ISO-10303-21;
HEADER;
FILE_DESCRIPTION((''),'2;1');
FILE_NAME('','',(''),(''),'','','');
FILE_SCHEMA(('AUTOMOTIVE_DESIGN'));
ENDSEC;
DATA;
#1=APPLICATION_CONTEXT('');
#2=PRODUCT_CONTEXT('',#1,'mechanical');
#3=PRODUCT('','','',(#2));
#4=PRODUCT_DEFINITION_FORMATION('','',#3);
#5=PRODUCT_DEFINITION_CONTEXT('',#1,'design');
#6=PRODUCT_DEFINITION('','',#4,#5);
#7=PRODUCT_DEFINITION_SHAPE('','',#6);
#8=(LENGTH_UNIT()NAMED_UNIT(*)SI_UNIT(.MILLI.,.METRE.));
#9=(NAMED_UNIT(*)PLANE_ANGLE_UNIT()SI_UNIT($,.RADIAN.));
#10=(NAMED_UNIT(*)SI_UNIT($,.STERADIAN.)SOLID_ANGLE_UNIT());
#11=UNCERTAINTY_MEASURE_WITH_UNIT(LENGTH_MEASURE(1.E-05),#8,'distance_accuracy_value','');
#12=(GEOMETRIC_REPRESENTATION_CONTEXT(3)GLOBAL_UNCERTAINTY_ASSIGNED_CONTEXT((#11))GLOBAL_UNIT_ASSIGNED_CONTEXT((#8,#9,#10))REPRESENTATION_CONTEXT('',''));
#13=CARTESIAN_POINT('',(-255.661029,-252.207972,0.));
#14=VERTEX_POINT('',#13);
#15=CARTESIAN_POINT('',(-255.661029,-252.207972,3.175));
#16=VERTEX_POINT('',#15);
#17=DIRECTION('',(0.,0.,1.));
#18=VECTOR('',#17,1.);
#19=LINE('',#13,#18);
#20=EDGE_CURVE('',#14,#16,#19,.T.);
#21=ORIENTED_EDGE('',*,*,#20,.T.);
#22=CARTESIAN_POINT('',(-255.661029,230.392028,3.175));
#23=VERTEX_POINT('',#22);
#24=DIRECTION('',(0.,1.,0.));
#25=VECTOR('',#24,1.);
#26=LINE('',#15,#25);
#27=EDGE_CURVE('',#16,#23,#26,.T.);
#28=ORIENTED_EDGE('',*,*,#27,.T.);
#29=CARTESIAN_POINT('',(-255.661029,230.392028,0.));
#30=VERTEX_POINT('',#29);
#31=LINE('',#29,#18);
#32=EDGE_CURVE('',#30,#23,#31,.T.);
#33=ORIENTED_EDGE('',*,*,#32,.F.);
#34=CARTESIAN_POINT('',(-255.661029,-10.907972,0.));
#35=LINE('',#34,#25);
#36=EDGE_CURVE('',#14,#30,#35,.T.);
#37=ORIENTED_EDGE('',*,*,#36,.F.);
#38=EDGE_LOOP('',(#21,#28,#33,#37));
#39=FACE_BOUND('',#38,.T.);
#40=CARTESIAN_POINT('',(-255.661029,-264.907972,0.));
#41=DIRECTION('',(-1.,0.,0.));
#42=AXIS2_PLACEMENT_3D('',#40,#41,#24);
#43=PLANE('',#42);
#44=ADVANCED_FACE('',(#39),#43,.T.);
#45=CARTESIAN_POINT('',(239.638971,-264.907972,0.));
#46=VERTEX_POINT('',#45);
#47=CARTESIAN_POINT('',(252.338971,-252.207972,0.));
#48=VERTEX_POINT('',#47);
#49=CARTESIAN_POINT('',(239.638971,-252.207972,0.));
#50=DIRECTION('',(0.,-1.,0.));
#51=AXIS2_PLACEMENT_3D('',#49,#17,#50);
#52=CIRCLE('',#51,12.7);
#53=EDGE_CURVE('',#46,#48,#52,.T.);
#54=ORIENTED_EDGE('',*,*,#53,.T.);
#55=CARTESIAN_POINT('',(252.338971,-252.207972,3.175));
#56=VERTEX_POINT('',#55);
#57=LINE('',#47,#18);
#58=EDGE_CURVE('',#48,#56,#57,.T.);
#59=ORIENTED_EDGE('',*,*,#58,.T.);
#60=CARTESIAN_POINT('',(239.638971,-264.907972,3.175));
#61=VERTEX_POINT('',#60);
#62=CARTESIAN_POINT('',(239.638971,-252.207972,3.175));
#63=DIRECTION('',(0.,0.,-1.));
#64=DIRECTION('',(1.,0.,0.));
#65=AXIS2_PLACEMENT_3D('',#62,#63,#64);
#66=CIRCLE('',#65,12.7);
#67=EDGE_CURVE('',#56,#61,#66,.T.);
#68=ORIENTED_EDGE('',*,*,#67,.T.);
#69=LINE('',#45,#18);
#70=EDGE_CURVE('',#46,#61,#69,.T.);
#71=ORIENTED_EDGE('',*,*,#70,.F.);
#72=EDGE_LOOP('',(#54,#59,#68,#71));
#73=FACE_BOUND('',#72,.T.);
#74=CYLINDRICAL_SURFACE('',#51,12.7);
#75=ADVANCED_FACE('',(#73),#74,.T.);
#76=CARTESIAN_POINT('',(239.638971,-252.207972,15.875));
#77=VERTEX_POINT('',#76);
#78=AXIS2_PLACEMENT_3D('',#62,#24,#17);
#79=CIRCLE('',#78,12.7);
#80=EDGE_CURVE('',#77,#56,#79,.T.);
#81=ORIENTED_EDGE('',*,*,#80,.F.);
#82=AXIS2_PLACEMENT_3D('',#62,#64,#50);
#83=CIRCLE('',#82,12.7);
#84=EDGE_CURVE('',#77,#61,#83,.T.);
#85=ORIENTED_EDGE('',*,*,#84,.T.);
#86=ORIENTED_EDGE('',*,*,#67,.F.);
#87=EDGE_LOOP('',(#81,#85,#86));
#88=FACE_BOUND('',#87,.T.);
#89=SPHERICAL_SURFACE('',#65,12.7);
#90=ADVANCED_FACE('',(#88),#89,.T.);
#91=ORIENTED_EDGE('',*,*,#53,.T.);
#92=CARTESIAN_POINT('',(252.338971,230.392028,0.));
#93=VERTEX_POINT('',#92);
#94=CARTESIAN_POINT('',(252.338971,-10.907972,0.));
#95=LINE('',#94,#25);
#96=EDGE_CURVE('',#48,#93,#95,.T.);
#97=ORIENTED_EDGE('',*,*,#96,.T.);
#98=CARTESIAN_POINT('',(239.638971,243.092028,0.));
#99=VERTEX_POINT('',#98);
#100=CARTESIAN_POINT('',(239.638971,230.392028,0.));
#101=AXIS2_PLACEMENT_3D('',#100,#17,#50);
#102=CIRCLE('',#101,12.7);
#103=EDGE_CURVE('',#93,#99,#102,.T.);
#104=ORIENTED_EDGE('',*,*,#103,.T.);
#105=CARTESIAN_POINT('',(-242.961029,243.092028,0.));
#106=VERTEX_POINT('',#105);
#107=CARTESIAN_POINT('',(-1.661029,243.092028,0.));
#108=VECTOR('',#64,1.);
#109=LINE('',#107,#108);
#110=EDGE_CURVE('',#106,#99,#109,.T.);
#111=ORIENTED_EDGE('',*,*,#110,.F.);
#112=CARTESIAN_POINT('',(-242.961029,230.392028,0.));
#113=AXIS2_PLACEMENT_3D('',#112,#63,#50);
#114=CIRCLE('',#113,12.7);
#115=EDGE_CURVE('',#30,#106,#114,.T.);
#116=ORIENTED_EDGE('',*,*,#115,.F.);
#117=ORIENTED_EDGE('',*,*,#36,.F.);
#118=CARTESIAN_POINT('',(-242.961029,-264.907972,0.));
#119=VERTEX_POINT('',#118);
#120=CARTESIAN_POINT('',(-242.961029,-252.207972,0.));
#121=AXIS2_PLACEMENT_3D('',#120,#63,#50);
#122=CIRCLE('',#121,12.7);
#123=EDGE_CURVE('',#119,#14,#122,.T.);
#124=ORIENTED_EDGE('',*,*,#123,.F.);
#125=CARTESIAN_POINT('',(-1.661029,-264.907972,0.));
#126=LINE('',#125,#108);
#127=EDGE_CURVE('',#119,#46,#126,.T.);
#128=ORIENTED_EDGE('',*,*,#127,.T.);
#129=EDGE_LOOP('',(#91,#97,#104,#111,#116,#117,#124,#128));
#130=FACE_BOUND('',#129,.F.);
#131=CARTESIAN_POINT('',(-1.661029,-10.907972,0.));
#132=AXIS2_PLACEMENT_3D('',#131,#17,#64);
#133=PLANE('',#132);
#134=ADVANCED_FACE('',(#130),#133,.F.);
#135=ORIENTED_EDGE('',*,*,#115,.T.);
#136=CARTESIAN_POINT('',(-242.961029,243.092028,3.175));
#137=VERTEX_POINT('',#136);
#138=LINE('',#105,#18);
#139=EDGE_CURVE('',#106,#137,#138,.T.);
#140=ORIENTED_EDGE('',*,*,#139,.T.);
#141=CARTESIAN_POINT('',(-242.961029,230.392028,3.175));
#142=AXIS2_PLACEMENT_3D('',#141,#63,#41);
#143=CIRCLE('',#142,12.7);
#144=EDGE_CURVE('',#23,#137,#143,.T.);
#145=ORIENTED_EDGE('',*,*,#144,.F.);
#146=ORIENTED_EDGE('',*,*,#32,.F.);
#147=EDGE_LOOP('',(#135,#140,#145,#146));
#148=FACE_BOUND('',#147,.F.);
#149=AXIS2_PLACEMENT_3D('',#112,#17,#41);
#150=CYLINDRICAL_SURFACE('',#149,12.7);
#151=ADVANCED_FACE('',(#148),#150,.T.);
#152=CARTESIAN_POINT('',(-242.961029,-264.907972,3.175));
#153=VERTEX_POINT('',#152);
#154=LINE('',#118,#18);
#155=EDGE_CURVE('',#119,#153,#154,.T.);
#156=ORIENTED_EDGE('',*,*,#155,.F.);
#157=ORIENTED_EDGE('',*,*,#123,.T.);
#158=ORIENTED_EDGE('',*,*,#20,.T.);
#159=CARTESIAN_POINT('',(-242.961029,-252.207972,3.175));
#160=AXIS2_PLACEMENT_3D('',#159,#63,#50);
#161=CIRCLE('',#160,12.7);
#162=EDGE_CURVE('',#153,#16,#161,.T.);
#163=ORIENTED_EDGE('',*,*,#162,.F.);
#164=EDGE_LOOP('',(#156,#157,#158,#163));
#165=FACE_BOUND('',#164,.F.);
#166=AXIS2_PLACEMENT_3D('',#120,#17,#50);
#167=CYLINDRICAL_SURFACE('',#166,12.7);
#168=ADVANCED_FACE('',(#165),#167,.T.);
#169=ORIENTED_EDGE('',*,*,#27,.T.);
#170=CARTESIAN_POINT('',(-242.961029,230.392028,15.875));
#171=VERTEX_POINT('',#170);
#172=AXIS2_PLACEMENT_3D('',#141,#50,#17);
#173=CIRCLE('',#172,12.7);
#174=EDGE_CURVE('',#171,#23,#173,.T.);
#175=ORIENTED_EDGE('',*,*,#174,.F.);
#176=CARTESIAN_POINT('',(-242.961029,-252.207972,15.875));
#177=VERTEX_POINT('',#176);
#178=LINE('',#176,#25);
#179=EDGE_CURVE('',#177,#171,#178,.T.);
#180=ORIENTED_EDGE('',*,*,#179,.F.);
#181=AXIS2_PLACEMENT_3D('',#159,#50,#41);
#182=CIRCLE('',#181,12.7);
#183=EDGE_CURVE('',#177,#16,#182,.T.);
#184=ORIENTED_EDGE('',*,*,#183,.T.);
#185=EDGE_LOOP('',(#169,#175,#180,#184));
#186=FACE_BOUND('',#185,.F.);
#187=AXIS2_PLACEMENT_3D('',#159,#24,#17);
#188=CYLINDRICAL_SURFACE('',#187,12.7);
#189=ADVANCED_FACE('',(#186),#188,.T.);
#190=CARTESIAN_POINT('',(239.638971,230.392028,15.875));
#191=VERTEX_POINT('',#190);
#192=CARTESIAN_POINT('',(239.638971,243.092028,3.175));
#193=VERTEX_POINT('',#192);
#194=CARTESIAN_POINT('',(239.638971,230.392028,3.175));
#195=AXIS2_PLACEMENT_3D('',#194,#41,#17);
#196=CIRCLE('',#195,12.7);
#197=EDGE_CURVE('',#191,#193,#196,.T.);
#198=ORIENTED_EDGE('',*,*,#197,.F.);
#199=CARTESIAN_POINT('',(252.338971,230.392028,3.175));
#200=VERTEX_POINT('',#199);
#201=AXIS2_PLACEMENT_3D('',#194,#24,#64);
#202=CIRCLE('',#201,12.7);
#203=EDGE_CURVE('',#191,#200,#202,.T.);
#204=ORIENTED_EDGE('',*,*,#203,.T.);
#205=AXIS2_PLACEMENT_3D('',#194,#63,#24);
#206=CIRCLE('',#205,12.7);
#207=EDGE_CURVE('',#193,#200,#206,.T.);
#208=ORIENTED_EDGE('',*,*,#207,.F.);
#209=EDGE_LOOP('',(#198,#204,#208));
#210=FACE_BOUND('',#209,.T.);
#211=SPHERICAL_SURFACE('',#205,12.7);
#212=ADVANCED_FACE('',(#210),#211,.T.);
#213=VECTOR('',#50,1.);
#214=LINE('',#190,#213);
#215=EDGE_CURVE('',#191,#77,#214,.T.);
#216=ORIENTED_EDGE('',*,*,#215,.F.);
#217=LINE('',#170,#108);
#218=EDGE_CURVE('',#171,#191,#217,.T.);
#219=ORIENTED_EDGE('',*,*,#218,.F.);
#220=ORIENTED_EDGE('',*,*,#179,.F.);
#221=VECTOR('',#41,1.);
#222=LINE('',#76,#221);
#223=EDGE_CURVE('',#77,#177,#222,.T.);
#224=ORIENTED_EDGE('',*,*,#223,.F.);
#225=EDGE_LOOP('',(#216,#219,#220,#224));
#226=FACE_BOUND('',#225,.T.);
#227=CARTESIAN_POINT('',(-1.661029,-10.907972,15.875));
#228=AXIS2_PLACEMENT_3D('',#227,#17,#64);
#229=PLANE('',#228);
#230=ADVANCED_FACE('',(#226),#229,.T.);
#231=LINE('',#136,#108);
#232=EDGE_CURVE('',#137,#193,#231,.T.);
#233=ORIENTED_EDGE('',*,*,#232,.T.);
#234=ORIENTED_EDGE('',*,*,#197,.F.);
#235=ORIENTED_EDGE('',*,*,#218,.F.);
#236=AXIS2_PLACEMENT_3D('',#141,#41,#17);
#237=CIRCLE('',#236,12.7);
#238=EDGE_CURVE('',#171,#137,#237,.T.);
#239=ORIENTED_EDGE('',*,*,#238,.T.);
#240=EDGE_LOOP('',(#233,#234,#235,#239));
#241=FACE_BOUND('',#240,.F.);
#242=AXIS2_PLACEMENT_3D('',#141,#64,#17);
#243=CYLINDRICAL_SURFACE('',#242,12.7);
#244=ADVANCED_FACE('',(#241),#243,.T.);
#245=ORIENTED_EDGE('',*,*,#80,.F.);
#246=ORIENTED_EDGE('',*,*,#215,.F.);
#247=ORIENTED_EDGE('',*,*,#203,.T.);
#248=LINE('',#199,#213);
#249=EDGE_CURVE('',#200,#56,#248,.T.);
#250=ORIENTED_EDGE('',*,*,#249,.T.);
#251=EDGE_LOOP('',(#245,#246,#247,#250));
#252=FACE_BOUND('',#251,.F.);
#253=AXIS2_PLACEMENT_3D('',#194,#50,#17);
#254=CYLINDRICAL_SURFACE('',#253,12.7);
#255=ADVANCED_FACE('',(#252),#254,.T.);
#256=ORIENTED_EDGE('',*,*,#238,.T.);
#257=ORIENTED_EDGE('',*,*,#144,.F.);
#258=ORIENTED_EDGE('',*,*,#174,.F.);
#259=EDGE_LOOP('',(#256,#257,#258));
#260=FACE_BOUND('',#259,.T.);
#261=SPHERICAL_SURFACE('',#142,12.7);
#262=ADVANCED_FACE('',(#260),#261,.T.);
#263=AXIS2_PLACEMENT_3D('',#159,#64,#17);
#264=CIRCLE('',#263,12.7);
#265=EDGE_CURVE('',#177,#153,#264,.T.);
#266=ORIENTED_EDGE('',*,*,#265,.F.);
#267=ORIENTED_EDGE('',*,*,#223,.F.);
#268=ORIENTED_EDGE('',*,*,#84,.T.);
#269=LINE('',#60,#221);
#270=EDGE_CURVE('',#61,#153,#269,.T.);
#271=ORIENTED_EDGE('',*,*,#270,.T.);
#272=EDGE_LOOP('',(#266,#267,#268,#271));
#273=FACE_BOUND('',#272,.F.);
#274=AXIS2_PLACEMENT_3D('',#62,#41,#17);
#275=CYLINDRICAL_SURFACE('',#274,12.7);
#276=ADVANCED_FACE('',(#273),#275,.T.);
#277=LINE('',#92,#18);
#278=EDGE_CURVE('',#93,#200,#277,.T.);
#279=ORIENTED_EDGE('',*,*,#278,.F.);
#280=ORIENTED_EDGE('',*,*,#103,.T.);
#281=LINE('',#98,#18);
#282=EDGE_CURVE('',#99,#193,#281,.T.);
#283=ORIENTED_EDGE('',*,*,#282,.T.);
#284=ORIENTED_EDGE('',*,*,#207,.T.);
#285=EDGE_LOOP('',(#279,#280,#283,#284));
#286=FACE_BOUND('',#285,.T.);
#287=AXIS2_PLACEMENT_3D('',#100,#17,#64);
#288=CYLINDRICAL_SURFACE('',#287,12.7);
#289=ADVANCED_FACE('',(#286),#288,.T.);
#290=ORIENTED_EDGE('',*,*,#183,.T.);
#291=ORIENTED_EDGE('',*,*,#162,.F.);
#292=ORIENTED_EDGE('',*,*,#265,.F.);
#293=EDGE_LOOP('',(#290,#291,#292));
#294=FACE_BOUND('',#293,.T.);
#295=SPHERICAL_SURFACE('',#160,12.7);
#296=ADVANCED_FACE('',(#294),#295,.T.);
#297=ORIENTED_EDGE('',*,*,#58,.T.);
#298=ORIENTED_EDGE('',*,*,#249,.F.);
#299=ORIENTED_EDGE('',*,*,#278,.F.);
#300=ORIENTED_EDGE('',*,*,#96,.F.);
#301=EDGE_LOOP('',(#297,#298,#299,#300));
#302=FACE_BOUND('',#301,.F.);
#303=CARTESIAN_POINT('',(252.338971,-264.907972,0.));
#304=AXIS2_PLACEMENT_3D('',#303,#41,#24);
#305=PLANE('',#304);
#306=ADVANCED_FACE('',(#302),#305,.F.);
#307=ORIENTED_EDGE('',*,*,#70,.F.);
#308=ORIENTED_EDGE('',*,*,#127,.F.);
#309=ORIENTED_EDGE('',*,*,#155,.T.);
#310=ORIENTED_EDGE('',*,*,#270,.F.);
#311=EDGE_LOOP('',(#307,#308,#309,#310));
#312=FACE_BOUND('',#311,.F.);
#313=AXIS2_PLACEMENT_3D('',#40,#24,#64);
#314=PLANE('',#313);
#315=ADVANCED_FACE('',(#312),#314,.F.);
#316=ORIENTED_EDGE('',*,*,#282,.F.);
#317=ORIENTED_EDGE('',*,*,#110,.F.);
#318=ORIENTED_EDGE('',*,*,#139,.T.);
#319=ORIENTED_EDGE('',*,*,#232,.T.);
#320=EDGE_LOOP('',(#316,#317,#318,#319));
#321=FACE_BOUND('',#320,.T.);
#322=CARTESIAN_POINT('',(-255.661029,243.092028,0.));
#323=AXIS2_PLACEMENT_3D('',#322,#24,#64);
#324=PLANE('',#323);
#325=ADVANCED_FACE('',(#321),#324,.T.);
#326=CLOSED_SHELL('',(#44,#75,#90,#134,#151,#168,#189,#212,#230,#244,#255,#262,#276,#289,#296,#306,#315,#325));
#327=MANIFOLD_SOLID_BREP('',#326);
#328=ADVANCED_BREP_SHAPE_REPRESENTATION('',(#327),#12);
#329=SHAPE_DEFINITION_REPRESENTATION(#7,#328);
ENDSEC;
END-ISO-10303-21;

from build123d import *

# Parameters (mm, degrees)
F0_W     = 508
F0_H     = 508
F1_DEPTH = 15.875
F4_R     = 12.7
F5_R     = 12.7
F6_R     = 12.7


# Not quite as in the source:
# - the program builds the solid bodies; features that only make, move or delete a surface that nothing else refers to are left out


with BuildPart() as f1:
    # F0 (on Top) → F1 (new body)
    with BuildSketch(Plane.XY):
        with Locations((-1.661028713, -10.90797159)):
            Rectangle(F0_W, F0_H)
    extrude(amount=F1_DEPTH)

    # F4
    f4_edges = [f1.edges().sort_by_distance(p)[0] for p in [
        (252.338971, 243.092028, 7.9375),
        (252.338971, -264.907972, 7.9375),
    ]]
    fillet(f4_edges, radius=F4_R)

    # F5
    f5_edges = [f1.edges().sort_by_distance(p)[0] for p in [
        (-255.661029, 243.092028, 7.9375),
        (-255.661029, -264.907972, 7.9375),
    ]]
    fillet(f5_edges, radius=F5_R)

    # F6
    f6_edges = [f1.edges().sort_by_distance(p)[0] for p in [
        (-1.661029, 243.092028, 15.875),
        (-251.941285, 239.372285, 15.875),
        (248.619227, 239.372285, 15.875),
        (-255.661029, -10.907972, 15.875),
        (252.338971, -10.907972, 15.875),
        (-251.941285, -261.188228, 15.875),
        (248.619227, -261.188228, 15.875),
        (-1.661029, -264.907972, 15.875),
    ]]
    fillet(f6_edges, radius=F6_R)


solid = f1.part
